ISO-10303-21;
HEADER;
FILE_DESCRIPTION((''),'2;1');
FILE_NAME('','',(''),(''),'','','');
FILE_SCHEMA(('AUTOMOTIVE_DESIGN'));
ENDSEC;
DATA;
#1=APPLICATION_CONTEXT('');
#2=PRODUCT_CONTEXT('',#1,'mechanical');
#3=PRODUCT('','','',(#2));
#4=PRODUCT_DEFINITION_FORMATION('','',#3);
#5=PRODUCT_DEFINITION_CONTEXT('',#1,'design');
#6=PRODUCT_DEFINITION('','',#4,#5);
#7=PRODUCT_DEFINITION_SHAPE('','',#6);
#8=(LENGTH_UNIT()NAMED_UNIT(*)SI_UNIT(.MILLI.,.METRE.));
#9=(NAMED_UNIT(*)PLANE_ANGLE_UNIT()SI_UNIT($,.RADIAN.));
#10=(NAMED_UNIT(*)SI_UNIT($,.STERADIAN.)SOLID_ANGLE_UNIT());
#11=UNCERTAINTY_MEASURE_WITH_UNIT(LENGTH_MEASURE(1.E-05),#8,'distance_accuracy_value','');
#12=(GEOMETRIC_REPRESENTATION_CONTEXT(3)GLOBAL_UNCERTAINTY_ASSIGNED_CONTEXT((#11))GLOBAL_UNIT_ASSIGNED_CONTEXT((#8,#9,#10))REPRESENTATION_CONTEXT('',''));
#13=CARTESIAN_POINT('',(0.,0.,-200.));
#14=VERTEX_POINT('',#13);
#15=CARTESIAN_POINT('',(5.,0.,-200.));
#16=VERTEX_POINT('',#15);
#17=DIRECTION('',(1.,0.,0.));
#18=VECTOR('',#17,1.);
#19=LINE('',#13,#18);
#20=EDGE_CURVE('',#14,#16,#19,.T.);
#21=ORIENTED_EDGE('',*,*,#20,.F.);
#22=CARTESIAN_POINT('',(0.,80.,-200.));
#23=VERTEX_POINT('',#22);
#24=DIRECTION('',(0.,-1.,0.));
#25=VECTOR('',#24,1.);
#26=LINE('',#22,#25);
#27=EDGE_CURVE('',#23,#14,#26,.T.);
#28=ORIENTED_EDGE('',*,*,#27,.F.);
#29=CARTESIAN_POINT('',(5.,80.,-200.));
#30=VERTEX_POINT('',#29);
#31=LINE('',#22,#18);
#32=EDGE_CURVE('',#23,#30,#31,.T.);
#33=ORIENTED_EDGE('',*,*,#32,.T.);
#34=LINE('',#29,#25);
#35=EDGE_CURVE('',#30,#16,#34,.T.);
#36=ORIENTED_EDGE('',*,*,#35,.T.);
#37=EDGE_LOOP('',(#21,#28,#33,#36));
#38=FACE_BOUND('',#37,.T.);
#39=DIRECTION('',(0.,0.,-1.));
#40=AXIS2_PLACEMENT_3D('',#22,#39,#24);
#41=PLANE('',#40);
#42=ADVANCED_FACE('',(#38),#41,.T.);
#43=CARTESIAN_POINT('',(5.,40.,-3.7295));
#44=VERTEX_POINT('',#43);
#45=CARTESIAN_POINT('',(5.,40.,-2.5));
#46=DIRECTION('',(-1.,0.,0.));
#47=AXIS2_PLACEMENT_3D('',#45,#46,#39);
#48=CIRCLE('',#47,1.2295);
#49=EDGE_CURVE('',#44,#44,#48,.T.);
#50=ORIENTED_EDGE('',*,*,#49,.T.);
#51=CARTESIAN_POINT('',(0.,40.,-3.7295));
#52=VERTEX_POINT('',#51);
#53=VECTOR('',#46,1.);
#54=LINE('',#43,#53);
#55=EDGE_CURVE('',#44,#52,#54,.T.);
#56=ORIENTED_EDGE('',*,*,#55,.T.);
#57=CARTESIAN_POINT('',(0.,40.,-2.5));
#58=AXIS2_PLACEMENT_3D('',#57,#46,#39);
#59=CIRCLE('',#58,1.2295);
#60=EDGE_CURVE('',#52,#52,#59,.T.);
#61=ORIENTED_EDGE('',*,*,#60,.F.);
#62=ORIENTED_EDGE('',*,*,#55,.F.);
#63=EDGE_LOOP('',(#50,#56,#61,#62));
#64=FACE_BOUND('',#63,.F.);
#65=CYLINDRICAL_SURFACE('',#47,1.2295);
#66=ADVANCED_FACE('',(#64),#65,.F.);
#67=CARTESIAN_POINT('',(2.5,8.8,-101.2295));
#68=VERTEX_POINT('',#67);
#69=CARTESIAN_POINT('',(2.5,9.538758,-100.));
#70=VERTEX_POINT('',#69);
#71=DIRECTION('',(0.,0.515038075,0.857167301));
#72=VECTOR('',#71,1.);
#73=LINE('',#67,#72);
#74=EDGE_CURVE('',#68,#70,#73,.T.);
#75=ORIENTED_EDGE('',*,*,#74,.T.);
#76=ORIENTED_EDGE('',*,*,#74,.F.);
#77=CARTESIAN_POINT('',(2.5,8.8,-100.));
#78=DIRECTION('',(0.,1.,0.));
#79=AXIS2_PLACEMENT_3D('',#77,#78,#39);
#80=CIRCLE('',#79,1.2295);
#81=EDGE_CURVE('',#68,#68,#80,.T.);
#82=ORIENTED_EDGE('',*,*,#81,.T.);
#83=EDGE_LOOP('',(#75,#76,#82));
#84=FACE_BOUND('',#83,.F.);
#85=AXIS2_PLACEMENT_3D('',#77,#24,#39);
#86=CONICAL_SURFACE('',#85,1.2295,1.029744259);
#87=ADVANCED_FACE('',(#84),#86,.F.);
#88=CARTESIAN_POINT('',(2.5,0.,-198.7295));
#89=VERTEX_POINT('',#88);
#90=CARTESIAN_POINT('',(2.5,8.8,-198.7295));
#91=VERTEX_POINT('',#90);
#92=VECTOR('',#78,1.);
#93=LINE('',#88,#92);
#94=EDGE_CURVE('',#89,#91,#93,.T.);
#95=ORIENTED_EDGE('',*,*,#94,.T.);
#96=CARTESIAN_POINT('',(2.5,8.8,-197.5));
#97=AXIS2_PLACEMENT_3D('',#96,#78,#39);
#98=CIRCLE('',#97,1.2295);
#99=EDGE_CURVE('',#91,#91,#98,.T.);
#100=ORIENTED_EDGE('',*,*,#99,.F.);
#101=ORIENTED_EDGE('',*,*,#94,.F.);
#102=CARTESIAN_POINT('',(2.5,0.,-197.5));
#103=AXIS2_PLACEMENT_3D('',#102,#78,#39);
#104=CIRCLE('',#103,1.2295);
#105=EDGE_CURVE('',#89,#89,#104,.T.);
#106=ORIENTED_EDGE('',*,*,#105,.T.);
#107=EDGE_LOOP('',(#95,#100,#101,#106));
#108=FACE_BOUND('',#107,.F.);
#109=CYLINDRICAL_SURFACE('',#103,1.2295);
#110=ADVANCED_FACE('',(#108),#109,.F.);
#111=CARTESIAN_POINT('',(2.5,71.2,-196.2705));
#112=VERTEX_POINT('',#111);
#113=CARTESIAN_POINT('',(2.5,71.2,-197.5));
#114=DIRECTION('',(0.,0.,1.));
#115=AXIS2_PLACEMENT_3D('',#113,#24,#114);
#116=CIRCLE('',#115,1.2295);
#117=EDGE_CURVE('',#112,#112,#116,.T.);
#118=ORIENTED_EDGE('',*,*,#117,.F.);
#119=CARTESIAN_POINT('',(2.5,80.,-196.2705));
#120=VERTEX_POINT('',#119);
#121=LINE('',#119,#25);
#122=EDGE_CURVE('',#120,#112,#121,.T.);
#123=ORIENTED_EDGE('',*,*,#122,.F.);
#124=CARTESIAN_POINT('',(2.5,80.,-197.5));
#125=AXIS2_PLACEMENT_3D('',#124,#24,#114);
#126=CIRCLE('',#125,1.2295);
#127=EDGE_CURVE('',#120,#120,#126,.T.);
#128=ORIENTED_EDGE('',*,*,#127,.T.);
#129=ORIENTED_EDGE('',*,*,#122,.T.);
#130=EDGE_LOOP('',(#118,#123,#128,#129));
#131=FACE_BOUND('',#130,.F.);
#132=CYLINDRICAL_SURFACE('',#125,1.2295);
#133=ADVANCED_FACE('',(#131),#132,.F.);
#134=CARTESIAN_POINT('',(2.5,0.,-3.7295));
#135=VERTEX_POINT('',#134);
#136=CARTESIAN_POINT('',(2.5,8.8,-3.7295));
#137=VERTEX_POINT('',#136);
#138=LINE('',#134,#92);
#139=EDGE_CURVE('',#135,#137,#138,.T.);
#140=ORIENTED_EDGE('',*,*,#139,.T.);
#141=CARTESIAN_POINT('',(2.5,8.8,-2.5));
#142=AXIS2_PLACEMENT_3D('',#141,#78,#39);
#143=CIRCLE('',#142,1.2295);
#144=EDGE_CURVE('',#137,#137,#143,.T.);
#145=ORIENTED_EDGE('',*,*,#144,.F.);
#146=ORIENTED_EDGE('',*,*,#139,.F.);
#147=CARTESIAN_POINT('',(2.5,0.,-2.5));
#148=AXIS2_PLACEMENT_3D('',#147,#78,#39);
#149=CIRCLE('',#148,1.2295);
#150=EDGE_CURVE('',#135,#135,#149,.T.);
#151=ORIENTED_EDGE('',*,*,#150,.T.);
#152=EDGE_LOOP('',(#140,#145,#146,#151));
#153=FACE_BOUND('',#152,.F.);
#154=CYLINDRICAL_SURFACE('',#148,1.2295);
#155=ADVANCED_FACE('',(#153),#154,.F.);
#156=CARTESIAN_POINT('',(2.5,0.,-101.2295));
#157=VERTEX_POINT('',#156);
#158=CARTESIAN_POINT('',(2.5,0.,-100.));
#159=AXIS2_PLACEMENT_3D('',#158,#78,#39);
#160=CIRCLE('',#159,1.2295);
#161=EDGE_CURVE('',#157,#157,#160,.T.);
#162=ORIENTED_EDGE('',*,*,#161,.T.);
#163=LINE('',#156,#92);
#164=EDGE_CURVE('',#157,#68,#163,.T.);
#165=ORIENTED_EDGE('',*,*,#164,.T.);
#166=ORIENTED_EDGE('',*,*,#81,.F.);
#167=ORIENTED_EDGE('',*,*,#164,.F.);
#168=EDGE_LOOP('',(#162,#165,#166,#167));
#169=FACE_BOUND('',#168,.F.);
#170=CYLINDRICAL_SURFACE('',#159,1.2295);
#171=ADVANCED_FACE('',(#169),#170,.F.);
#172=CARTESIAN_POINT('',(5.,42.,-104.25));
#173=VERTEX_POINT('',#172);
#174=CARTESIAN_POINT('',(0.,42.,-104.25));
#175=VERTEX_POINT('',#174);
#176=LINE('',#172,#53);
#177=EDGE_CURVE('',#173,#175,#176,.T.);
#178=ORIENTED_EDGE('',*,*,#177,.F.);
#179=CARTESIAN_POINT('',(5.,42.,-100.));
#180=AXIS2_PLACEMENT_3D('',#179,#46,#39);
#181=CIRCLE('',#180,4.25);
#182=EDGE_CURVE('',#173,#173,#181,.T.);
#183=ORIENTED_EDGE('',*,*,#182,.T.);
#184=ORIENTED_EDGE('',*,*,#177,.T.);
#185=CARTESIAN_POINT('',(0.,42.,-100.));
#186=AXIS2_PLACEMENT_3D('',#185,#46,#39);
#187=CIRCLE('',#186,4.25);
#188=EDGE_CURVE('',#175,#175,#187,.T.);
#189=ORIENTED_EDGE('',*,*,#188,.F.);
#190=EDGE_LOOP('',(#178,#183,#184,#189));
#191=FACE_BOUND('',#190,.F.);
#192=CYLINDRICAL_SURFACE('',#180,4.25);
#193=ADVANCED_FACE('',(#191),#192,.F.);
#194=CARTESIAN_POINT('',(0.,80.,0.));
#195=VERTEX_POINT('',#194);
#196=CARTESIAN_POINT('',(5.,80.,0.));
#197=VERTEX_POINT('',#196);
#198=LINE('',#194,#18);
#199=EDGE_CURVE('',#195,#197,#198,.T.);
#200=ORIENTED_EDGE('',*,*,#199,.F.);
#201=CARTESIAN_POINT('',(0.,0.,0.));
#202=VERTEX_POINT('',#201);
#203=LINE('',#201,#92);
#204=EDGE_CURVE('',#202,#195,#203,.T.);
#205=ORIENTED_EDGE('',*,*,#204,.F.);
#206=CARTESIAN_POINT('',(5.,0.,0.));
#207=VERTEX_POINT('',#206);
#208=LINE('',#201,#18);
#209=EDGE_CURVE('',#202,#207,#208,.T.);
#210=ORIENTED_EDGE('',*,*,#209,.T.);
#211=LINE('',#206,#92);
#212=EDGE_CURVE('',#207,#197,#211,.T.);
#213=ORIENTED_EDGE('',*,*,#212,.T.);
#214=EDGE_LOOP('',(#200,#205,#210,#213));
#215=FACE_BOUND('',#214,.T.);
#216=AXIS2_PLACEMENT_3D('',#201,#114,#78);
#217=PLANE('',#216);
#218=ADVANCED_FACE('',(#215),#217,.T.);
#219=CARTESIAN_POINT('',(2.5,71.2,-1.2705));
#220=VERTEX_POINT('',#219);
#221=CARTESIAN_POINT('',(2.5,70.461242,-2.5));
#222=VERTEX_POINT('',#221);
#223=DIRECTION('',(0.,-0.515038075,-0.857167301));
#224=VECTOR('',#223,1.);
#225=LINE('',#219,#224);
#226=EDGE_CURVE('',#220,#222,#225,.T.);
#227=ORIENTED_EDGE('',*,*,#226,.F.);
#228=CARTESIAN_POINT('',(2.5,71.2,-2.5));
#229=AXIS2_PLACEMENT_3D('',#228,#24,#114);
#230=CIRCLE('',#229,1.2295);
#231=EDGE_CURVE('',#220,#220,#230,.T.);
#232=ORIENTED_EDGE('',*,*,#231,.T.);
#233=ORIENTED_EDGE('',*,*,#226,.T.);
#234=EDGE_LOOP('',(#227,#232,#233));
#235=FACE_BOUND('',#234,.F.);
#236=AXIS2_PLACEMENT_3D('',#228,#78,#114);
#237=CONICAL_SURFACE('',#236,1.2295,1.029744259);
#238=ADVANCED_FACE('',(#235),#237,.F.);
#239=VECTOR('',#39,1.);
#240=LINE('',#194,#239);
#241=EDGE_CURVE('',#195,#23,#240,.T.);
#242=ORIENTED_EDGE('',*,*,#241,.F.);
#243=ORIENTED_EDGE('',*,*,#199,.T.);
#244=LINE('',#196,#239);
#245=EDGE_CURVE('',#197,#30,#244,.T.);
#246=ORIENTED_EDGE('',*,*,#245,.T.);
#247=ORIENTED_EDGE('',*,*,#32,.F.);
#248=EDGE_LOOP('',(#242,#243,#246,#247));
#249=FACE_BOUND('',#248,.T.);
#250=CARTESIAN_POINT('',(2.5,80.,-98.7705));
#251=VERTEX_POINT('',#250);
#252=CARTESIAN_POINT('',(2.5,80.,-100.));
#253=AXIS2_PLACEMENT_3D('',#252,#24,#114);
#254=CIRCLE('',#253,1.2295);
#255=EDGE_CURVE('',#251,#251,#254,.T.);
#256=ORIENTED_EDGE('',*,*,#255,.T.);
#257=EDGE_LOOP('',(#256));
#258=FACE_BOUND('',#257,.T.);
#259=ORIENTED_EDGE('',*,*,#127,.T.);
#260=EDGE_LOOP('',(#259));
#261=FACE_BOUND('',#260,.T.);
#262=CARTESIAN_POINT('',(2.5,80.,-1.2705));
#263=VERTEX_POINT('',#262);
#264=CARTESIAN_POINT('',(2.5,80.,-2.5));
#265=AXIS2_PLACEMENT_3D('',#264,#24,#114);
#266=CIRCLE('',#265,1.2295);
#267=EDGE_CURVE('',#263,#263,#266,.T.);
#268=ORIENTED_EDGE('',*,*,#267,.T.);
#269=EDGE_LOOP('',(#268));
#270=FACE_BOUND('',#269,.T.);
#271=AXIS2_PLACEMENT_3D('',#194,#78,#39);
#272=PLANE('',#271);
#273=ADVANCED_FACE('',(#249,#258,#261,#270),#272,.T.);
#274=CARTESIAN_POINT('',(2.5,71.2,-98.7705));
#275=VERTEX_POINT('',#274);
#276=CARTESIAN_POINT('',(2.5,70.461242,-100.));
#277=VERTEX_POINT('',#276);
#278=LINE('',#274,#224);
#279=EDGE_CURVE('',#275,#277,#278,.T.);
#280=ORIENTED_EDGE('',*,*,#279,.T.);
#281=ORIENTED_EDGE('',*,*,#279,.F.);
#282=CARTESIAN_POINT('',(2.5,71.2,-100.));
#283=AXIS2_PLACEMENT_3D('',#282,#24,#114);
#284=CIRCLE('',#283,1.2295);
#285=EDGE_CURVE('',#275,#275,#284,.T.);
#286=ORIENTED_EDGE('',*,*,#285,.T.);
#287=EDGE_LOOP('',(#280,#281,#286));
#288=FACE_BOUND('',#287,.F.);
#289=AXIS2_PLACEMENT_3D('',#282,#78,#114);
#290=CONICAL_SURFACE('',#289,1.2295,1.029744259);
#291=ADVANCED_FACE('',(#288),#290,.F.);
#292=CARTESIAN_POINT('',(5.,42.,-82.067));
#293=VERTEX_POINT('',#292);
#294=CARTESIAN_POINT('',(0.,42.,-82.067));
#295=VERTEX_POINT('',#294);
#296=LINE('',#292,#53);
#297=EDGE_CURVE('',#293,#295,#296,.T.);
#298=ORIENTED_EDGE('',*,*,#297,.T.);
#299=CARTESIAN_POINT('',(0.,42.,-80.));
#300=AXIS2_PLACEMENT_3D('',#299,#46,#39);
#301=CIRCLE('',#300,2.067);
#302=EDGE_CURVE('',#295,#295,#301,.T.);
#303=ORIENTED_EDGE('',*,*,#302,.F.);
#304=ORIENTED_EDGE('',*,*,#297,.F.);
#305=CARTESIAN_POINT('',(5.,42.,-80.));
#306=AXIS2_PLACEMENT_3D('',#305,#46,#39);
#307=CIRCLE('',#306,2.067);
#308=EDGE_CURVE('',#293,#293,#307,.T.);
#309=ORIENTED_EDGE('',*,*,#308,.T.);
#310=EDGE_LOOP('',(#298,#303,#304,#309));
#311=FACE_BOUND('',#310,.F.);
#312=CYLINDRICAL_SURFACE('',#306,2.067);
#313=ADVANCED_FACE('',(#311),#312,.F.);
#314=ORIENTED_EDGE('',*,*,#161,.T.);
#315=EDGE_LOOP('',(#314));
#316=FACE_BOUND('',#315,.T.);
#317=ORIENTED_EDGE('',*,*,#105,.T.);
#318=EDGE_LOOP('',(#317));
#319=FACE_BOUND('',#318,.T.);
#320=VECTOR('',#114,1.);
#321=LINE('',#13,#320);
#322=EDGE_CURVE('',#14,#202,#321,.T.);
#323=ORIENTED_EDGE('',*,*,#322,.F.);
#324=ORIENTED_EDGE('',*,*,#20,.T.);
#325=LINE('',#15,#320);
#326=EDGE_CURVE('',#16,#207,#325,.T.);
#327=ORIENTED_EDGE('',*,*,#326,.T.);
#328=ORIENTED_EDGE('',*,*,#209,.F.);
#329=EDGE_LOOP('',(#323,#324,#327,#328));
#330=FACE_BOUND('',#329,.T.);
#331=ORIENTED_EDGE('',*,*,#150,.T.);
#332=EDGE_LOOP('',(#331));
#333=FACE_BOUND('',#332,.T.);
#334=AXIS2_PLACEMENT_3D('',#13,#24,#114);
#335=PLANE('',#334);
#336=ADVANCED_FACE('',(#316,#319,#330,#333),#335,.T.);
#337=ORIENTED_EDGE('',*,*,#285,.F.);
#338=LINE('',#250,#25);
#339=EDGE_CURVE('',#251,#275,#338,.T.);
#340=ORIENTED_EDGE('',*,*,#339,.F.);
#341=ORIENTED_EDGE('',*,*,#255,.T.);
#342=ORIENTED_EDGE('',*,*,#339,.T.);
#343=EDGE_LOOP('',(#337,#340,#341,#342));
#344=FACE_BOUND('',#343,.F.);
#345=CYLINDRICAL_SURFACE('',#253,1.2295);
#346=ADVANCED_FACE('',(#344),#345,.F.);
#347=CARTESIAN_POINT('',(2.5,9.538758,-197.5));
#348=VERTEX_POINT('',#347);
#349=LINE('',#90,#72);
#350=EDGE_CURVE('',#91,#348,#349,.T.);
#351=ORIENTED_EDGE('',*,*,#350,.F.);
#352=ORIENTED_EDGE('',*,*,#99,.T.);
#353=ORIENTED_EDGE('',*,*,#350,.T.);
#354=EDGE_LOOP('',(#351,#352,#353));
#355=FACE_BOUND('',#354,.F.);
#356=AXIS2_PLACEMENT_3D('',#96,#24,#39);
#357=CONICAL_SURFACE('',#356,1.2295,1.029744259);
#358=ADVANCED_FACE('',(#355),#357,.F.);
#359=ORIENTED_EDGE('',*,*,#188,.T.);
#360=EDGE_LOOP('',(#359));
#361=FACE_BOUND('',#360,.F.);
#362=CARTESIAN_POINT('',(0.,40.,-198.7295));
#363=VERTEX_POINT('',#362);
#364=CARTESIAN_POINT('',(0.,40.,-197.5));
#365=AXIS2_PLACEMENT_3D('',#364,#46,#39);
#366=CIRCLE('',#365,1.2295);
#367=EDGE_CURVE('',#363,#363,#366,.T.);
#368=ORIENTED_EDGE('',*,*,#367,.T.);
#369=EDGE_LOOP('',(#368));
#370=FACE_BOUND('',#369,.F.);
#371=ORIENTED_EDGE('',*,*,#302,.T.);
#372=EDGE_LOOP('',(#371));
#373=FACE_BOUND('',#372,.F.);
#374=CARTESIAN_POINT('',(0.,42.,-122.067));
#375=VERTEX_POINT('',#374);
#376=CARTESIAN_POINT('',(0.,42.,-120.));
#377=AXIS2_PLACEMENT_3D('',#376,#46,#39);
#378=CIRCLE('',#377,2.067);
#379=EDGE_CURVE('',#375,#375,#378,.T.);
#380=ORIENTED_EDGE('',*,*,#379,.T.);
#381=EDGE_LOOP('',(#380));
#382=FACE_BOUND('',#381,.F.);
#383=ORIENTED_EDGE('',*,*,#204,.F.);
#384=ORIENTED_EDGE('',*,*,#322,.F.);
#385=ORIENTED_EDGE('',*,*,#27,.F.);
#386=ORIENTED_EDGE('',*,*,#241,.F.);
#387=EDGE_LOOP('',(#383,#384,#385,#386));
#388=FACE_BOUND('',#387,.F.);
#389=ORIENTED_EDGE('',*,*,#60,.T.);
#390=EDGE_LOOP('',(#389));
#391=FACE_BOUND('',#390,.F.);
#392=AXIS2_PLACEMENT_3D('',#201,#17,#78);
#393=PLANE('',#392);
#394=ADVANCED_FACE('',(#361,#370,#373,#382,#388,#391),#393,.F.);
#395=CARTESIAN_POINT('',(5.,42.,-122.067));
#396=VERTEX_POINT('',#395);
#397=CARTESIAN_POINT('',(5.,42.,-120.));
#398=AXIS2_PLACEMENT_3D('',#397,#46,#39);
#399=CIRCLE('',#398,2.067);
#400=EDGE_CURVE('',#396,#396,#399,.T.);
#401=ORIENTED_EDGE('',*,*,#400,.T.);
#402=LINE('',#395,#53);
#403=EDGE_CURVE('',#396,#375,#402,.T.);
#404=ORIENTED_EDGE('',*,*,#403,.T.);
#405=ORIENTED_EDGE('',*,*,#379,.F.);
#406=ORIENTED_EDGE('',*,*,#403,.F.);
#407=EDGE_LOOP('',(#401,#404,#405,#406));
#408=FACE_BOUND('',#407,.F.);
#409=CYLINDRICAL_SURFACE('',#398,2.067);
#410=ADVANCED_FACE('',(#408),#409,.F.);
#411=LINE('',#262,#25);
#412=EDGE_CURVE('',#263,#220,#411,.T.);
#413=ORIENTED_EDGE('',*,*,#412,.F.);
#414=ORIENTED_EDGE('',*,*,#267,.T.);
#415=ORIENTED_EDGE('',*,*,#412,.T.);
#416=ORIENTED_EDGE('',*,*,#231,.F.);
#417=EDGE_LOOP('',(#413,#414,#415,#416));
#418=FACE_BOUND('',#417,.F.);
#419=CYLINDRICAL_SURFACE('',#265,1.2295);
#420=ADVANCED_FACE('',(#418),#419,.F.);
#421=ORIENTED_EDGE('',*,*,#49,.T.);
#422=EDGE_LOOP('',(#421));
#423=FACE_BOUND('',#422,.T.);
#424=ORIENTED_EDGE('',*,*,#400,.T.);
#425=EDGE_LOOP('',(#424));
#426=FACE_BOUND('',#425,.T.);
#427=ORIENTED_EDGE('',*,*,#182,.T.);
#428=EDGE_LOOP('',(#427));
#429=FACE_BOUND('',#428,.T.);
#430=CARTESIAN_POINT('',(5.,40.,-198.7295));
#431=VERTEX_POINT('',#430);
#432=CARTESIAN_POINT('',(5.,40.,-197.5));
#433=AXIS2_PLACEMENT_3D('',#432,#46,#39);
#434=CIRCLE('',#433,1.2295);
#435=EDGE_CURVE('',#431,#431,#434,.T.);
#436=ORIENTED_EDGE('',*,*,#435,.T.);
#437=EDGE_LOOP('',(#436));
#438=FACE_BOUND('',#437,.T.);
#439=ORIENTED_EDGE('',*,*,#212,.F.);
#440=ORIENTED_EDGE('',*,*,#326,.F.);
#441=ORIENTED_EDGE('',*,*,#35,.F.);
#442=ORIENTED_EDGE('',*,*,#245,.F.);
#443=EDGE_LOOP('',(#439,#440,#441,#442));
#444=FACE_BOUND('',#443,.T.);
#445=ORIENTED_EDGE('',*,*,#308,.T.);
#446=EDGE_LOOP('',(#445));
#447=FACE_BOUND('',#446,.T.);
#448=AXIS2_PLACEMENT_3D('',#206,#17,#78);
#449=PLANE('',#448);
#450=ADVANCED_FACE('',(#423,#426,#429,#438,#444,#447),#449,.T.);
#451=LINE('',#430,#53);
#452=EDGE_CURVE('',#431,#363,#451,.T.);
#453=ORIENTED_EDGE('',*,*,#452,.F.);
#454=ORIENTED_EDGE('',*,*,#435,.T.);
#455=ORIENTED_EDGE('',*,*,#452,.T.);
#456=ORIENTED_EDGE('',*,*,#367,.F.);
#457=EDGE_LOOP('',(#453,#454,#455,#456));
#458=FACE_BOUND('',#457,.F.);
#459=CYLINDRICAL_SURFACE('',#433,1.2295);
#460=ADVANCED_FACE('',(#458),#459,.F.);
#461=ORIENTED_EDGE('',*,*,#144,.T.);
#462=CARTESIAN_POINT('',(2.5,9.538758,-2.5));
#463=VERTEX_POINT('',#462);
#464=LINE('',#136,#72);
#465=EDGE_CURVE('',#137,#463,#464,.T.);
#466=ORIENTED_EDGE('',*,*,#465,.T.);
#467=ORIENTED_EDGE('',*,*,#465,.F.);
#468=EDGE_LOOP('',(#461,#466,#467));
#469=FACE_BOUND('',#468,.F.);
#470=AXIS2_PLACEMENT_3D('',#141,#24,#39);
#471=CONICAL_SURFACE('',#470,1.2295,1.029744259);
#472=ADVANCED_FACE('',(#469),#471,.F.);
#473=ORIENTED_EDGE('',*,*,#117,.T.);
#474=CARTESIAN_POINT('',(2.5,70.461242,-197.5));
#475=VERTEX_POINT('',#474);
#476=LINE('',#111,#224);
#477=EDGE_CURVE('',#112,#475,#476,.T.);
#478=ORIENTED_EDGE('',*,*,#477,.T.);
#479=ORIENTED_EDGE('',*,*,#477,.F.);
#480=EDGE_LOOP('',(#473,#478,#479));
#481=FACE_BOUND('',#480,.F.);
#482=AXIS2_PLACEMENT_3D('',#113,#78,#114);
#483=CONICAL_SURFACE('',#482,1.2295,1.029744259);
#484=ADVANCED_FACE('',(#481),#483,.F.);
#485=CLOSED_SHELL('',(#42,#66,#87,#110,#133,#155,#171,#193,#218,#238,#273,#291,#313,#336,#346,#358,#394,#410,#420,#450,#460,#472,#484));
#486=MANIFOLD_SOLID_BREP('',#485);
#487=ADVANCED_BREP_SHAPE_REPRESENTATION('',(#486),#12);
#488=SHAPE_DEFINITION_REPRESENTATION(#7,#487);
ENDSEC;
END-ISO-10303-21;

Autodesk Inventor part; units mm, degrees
ref_plane "YZ Plane" through (0, 0, 0) normal (1, 0, 0) x (0, 1, 0)
ref_plane "XZ Plane" through (0, 0, 0) normal (0, 1, 0) x (-1, 0, 0)
ref_plane "XY Plane" through (0, 0, 0) normal (0, 0, 1) x (1, 0, 0)
sketch "Esquisse1" plane through (0, 0, 0) normal (1, 0, 0) x (0, 1, 0)
  line L0 (0, 0) -> (80, 0)
  line L1 (80, 0) -> (80, -200)
  line L2 (80, -200) -> (0, -200)
  line L3 (0, -200) -> (0, 0)
  dimension "d0" = 80
  dimension "d1" = 200
extrude "Extrusion1" add sketch "Esquisse1" along normal blind 5
sketch "Esquisse3" plane through (5, 0, 0) normal (1, 0, 0) x (0, 0, -1)
  line L0 (0, 0) -> (2.5, 0)
  line L1 (0, 0) -> (200, 0) projected
  line L2 (2.5, 0) -> (2.5, 40)
  line L3 (100, 0) -> (100, 21.0843)
  point P0 (2.5, 40)
  point P1 (197.5, 40)
  dimension "d15" = 2.5
  dimension "d16" = 40
hole "Perçage2" at (5, 40, -2.5) at (5, 40, -197.5) direction (-1, 0, 0) diameter 2.459 end through all thread size "M3x0.5" class "6H" standard "ISO Metric profile"
sketch "Esquisse4" plane through (0, 0, -200) normal (0, -1, 0) x (1, 0, 0)
  line L0 (0, 200) -> (0, 197.5)
  line L1 (0, 0) -> (0, 200) projected
  line L2 (0, 197.5) -> (2.5, 197.5)
  line L3 (5, 200) -> (5, 0) projected
  point P0 (2.5, 2.5)
  point P1 (2.5, 100)
  dimension "d24" = 2.5
  dimension "d25" = 2.5
  dimension "d26" = 90
hole "Perçage3" at (2.5, 0, -2.5) at (2.5, 0, -197.5) at (2.5, 0, -100) direction (0, 1, 0) diameter 2.459 depth 8.8 tip angle 118 thread size "M3x0.5" class "6H" standard "ISO Metric profile"
sketch "Esquisse5" plane through (0, 80, 0) normal (0, 1, 0) x (1, 0, 0)
  line L0 (0, 0) -> (2.5, 0)
  line L1 (0, 0) -> (5, 0) projected
  line L2 (2.5, 0) -> (2.5, 2.5)
  line L3 (2.5, 0) -> (5, 0) construction
  line L4 (0, 200) -> (0, 0) projected
  line L5 (0, 100) -> (2.5, 100)
  point P0 (2.5, 197.5)
  dimension "d34" = 2.5
  dimension "d35" = 90
hole "Perçage4" at (2.5, 80, -2.5) at (2.5, 80, -197.5) at (2.5, 80, -100) direction (0, -1, 0) diameter 2.459 depth 8.8 tip angle 118 thread size "M3x0.5" class "6H" standard "ISO Metric profile"
sketch "Esquisse7" plane through (5, 0, 0) normal (1, 0, 0) x (0, 0, -1)
  line L0 (0, 0) -> (100, 0)
  line L1 (0, 0) -> (200, 0) projected
  line L2 (100, 0) -> (180, 0) construction
  line L3 (100, 80) -> (100, 10)
  line L4 (100, 80) -> (170, 80) construction
  line L5 (100, 10) -> (90.8075, 10)
  line L6 (100, 10) -> (80, 10)
  line L7 (80, 10) -> (80, 42)
  point P0 (120, 42)
  dimension "d50" = 100
  dimension "d53" = 70
  dimension "d54" = 90
  dimension "d67" = 20
  dimension "d68" = 32
hole "Perçage6" at (5, 42, -120) at (5, 42, -80) direction (-1, 0, 0) diameter 4.134 end through all thread size "M5x0.8" class "6H" standard "ISO Metric profile"
sketch "Esquisse8" plane through (5, 0, 0) normal (1, 0, 0) x (0, 0, -1)
  circle A0 centre (80, 42) radius 2.067 projected
  line L0 (80, 42) -> (100, 42)
  point P0 (0, 0)
  dimension "d69" = 20
hole "Perçage7" at (5, 42, -100) direction (-1, 0, 0) diameter 8.5 end through all
properties part number "chassis_côté"
